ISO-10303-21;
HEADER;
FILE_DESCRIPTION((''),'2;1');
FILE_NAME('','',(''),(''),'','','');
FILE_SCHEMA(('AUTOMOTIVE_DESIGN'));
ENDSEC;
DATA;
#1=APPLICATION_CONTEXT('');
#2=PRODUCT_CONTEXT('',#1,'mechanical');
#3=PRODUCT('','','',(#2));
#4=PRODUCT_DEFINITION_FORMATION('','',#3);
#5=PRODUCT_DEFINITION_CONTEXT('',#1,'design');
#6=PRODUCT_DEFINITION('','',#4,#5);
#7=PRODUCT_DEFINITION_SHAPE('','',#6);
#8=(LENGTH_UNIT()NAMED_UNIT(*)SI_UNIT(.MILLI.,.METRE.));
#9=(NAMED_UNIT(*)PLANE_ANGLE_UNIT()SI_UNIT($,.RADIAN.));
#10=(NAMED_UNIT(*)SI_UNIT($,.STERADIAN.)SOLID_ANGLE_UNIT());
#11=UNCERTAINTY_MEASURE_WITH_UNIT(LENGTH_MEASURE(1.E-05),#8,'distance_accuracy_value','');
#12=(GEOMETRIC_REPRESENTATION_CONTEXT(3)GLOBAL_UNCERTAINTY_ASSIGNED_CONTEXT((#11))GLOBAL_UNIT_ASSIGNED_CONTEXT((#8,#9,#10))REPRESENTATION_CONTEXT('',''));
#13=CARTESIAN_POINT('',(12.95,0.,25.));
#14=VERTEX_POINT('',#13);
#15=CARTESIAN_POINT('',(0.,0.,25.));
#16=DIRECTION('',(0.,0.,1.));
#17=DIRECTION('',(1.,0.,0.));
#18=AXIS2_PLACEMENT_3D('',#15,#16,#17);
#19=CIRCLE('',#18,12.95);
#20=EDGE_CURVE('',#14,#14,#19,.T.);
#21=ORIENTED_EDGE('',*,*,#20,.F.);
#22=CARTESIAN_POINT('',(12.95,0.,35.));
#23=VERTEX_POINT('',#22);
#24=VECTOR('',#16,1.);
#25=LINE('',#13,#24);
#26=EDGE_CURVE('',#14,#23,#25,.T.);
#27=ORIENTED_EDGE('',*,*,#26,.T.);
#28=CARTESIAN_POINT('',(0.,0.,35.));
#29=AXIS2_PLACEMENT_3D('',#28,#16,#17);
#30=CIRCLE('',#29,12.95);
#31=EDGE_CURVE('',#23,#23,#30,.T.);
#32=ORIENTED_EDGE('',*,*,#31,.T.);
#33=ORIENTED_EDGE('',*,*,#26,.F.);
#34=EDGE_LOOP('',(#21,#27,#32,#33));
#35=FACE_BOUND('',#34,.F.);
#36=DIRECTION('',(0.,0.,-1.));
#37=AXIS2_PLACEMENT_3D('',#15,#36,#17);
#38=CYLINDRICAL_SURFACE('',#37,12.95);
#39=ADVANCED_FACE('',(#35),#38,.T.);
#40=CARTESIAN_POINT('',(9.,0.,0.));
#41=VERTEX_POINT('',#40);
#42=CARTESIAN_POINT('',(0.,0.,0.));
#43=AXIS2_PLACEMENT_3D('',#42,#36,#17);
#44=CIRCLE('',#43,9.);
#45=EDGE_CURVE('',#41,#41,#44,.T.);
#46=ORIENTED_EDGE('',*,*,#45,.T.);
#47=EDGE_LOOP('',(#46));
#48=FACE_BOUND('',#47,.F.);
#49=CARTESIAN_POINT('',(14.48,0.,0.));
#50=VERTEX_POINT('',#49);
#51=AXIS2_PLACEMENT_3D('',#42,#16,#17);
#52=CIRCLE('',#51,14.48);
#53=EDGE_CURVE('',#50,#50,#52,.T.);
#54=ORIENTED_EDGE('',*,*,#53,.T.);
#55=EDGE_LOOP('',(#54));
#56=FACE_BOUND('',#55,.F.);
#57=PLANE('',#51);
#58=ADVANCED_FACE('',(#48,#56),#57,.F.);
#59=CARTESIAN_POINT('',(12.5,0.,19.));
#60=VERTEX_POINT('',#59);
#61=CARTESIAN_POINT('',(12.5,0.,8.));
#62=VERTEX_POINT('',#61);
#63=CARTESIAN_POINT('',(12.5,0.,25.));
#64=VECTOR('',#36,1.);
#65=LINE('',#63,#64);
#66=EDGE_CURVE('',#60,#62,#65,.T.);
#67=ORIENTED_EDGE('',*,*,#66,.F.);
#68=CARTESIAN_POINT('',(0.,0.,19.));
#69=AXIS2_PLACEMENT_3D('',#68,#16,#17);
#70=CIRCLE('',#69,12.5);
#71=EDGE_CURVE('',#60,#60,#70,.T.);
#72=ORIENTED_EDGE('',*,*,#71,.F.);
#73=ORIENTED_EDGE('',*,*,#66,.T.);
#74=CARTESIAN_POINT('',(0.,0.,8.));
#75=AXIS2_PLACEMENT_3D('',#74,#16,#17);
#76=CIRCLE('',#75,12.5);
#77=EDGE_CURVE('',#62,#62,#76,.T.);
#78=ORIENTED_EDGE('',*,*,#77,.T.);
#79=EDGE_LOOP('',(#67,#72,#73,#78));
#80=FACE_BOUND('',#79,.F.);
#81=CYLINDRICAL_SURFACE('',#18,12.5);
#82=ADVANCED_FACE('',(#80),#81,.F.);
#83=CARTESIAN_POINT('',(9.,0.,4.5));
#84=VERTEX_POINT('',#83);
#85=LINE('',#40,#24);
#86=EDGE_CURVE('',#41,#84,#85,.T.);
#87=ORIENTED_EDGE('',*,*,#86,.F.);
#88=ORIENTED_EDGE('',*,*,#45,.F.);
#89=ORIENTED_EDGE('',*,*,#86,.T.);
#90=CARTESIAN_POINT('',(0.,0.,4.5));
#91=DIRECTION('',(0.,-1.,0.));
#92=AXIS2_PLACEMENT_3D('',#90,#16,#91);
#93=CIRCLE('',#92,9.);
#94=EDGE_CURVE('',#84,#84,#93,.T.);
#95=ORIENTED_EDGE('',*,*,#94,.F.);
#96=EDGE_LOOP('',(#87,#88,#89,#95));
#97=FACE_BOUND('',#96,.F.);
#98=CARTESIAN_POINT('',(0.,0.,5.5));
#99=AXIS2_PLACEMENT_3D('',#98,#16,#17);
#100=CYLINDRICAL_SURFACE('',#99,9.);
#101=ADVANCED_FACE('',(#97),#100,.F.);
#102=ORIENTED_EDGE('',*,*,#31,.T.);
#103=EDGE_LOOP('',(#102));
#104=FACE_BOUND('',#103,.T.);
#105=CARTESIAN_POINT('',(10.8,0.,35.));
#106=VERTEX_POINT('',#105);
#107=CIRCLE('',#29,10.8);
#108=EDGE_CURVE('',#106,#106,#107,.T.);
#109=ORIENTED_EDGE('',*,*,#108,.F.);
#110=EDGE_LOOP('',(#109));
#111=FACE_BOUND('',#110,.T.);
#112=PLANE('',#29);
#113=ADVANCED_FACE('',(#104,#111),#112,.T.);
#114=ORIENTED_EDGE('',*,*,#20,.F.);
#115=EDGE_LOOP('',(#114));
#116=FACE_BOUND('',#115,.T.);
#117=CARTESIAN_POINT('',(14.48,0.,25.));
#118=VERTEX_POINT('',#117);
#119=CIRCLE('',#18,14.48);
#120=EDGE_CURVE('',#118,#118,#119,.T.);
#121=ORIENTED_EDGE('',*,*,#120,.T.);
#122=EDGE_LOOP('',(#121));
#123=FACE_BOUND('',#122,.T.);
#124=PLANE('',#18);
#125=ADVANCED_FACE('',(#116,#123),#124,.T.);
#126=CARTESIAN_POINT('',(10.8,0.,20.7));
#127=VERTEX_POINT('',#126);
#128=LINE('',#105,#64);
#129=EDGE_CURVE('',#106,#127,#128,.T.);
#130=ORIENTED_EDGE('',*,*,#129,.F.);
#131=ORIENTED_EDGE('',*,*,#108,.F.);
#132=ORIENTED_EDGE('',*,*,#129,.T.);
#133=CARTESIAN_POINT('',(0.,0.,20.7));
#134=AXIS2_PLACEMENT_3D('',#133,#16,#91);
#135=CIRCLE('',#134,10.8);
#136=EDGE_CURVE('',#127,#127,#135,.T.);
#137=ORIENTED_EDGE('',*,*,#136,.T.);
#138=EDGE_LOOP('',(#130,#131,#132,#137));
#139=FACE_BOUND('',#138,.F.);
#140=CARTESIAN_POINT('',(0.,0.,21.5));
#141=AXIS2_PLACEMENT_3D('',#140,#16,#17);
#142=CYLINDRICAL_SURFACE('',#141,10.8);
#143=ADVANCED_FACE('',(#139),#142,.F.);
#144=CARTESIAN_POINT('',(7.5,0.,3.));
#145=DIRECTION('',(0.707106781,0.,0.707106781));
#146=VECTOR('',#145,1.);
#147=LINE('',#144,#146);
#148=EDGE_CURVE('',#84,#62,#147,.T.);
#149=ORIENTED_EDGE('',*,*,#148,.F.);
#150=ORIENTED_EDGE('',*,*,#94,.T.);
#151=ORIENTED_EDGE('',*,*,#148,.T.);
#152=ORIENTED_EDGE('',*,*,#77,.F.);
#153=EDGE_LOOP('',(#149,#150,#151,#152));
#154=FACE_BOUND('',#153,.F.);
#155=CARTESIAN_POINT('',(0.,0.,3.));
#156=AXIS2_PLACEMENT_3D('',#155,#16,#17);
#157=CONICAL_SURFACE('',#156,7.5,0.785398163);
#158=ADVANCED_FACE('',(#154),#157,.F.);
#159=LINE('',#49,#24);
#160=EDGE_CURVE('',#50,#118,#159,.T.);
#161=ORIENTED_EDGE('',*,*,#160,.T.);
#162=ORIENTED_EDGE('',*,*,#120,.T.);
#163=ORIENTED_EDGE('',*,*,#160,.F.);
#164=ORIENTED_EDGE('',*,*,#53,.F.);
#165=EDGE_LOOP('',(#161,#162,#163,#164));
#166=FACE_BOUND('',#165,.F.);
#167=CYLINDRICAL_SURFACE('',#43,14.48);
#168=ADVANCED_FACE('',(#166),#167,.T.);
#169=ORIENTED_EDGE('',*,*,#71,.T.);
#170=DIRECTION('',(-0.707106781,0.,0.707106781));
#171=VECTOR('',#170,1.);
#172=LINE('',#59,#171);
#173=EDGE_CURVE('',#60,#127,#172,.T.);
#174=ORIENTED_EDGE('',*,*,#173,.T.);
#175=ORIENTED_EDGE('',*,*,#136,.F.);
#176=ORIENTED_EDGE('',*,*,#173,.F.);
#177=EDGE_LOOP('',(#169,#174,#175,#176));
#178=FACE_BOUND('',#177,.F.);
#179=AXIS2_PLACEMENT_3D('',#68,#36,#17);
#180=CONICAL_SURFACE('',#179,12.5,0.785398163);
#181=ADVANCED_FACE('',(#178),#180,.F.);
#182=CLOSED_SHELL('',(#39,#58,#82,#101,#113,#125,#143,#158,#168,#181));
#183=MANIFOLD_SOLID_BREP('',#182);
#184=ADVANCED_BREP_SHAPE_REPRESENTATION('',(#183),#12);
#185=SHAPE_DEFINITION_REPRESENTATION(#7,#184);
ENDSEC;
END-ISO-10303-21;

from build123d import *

# Parameters (mm, degrees)
F0_R          = 14.48
F1_DEPTH      = 25
F2_R          = 12.5
F3_DEPTH      = 22
F4_R          = 9
F5_DEPTH      = 3
F6_R          = 12.5
F7_DEPTH      = 1
F8_R          = 12.95
F9_DEPTH      = 10
F10_R         = 10.8
F11_DEPTH     = 11
F12_S5_R      = 10.8
F12_T6_DEPTH  = 19
F12_S11_R     = 9
F12_T12_DEPTH = 19


# Not quite as in the source:
# - a fillet or chamfer that OpenCascade refuses, or shapes differently, is made with other operations: its cross-section is extruded or revolved along the edge and cut away or added


with BuildPart() as f1:
    # F0 (on Top) → F1 (new body)
    with BuildSketch(Plane.XY):
        Circle(F0_R)
    extrude(amount=F1_DEPTH)

    # F2 (on face) → F3 (cut)
    with BuildSketch(Plane.XY.offset(25)):
        Circle(F2_R)
    extrude(amount=-F3_DEPTH, mode=Mode.SUBTRACT)

    # F4 (on face) → F5 (cut, through all)
    with BuildSketch(Plane(origin=(0, 0, 0), x_dir=(1, 0, 0), z_dir=(0, 0, -1))):
        Circle(F4_R)
    extrude(amount=-F5_DEPTH, mode=Mode.SUBTRACT)

    # F6 (on face) → F7 (join)
    with BuildSketch(Plane.XY.offset(25)):
        Circle(F6_R)
    extrude(amount=-F7_DEPTH)

    # F8 (on face) → F9 (join)
    with BuildSketch(Plane.XY.offset(25)):
        Circle(F8_R)
    extrude(amount=F9_DEPTH)

    # F10 (on face) → F11 (cut, through all)
    with BuildSketch(Plane.XY.offset(35)):
        Circle(F10_R)
    extrude(amount=-F11_DEPTH, mode=Mode.SUBTRACT)

    # F12: chamfer of 5 on 3 edges, made by hand


with BuildPart() as f12_tool2:
    # F12_s3 → F12_t4 (revolve)
    with BuildSketch(Plane.XZ):
        Polygon((12.5, 19), (7.5, 24), (12.5, 24), align=None)
    revolve(axis=Axis((0, 0, 24), (0, 0, 1)))

    # F12_s5 → F12_t6 (cut, symmetric)
    with BuildSketch(Plane.XY.offset(21.5)):
        Circle(F12_S5_R)
    extrude(amount=F12_T6_DEPTH, both=True, mode=Mode.SUBTRACT)


with BuildPart() as f1_1:
    add(f1.part)

    # F12_t1: union F12_tool2
    add(f12_tool2.part)


with BuildPart() as f12_tool8:
    # F12_s9 → F12_t10 (revolve)
    with BuildSketch(Plane.XZ):
        Polygon((7.5, 3), (12.5, 8), (12.5, 3), align=None)
    revolve(axis=Axis((0, 0, 3), (0, 0, 1)))

    # F12_s11 → F12_t12 (cut, symmetric)
    with BuildSketch(Plane.XY.offset(5.5)):
        Circle(F12_S11_R)
    extrude(amount=F12_T12_DEPTH, both=True, mode=Mode.SUBTRACT)


with BuildPart() as f1_2:
    add(f1_1.part)

    # F12_t7: union F12_tool8
    add(f12_tool8.part)


solid = f1_2.part
